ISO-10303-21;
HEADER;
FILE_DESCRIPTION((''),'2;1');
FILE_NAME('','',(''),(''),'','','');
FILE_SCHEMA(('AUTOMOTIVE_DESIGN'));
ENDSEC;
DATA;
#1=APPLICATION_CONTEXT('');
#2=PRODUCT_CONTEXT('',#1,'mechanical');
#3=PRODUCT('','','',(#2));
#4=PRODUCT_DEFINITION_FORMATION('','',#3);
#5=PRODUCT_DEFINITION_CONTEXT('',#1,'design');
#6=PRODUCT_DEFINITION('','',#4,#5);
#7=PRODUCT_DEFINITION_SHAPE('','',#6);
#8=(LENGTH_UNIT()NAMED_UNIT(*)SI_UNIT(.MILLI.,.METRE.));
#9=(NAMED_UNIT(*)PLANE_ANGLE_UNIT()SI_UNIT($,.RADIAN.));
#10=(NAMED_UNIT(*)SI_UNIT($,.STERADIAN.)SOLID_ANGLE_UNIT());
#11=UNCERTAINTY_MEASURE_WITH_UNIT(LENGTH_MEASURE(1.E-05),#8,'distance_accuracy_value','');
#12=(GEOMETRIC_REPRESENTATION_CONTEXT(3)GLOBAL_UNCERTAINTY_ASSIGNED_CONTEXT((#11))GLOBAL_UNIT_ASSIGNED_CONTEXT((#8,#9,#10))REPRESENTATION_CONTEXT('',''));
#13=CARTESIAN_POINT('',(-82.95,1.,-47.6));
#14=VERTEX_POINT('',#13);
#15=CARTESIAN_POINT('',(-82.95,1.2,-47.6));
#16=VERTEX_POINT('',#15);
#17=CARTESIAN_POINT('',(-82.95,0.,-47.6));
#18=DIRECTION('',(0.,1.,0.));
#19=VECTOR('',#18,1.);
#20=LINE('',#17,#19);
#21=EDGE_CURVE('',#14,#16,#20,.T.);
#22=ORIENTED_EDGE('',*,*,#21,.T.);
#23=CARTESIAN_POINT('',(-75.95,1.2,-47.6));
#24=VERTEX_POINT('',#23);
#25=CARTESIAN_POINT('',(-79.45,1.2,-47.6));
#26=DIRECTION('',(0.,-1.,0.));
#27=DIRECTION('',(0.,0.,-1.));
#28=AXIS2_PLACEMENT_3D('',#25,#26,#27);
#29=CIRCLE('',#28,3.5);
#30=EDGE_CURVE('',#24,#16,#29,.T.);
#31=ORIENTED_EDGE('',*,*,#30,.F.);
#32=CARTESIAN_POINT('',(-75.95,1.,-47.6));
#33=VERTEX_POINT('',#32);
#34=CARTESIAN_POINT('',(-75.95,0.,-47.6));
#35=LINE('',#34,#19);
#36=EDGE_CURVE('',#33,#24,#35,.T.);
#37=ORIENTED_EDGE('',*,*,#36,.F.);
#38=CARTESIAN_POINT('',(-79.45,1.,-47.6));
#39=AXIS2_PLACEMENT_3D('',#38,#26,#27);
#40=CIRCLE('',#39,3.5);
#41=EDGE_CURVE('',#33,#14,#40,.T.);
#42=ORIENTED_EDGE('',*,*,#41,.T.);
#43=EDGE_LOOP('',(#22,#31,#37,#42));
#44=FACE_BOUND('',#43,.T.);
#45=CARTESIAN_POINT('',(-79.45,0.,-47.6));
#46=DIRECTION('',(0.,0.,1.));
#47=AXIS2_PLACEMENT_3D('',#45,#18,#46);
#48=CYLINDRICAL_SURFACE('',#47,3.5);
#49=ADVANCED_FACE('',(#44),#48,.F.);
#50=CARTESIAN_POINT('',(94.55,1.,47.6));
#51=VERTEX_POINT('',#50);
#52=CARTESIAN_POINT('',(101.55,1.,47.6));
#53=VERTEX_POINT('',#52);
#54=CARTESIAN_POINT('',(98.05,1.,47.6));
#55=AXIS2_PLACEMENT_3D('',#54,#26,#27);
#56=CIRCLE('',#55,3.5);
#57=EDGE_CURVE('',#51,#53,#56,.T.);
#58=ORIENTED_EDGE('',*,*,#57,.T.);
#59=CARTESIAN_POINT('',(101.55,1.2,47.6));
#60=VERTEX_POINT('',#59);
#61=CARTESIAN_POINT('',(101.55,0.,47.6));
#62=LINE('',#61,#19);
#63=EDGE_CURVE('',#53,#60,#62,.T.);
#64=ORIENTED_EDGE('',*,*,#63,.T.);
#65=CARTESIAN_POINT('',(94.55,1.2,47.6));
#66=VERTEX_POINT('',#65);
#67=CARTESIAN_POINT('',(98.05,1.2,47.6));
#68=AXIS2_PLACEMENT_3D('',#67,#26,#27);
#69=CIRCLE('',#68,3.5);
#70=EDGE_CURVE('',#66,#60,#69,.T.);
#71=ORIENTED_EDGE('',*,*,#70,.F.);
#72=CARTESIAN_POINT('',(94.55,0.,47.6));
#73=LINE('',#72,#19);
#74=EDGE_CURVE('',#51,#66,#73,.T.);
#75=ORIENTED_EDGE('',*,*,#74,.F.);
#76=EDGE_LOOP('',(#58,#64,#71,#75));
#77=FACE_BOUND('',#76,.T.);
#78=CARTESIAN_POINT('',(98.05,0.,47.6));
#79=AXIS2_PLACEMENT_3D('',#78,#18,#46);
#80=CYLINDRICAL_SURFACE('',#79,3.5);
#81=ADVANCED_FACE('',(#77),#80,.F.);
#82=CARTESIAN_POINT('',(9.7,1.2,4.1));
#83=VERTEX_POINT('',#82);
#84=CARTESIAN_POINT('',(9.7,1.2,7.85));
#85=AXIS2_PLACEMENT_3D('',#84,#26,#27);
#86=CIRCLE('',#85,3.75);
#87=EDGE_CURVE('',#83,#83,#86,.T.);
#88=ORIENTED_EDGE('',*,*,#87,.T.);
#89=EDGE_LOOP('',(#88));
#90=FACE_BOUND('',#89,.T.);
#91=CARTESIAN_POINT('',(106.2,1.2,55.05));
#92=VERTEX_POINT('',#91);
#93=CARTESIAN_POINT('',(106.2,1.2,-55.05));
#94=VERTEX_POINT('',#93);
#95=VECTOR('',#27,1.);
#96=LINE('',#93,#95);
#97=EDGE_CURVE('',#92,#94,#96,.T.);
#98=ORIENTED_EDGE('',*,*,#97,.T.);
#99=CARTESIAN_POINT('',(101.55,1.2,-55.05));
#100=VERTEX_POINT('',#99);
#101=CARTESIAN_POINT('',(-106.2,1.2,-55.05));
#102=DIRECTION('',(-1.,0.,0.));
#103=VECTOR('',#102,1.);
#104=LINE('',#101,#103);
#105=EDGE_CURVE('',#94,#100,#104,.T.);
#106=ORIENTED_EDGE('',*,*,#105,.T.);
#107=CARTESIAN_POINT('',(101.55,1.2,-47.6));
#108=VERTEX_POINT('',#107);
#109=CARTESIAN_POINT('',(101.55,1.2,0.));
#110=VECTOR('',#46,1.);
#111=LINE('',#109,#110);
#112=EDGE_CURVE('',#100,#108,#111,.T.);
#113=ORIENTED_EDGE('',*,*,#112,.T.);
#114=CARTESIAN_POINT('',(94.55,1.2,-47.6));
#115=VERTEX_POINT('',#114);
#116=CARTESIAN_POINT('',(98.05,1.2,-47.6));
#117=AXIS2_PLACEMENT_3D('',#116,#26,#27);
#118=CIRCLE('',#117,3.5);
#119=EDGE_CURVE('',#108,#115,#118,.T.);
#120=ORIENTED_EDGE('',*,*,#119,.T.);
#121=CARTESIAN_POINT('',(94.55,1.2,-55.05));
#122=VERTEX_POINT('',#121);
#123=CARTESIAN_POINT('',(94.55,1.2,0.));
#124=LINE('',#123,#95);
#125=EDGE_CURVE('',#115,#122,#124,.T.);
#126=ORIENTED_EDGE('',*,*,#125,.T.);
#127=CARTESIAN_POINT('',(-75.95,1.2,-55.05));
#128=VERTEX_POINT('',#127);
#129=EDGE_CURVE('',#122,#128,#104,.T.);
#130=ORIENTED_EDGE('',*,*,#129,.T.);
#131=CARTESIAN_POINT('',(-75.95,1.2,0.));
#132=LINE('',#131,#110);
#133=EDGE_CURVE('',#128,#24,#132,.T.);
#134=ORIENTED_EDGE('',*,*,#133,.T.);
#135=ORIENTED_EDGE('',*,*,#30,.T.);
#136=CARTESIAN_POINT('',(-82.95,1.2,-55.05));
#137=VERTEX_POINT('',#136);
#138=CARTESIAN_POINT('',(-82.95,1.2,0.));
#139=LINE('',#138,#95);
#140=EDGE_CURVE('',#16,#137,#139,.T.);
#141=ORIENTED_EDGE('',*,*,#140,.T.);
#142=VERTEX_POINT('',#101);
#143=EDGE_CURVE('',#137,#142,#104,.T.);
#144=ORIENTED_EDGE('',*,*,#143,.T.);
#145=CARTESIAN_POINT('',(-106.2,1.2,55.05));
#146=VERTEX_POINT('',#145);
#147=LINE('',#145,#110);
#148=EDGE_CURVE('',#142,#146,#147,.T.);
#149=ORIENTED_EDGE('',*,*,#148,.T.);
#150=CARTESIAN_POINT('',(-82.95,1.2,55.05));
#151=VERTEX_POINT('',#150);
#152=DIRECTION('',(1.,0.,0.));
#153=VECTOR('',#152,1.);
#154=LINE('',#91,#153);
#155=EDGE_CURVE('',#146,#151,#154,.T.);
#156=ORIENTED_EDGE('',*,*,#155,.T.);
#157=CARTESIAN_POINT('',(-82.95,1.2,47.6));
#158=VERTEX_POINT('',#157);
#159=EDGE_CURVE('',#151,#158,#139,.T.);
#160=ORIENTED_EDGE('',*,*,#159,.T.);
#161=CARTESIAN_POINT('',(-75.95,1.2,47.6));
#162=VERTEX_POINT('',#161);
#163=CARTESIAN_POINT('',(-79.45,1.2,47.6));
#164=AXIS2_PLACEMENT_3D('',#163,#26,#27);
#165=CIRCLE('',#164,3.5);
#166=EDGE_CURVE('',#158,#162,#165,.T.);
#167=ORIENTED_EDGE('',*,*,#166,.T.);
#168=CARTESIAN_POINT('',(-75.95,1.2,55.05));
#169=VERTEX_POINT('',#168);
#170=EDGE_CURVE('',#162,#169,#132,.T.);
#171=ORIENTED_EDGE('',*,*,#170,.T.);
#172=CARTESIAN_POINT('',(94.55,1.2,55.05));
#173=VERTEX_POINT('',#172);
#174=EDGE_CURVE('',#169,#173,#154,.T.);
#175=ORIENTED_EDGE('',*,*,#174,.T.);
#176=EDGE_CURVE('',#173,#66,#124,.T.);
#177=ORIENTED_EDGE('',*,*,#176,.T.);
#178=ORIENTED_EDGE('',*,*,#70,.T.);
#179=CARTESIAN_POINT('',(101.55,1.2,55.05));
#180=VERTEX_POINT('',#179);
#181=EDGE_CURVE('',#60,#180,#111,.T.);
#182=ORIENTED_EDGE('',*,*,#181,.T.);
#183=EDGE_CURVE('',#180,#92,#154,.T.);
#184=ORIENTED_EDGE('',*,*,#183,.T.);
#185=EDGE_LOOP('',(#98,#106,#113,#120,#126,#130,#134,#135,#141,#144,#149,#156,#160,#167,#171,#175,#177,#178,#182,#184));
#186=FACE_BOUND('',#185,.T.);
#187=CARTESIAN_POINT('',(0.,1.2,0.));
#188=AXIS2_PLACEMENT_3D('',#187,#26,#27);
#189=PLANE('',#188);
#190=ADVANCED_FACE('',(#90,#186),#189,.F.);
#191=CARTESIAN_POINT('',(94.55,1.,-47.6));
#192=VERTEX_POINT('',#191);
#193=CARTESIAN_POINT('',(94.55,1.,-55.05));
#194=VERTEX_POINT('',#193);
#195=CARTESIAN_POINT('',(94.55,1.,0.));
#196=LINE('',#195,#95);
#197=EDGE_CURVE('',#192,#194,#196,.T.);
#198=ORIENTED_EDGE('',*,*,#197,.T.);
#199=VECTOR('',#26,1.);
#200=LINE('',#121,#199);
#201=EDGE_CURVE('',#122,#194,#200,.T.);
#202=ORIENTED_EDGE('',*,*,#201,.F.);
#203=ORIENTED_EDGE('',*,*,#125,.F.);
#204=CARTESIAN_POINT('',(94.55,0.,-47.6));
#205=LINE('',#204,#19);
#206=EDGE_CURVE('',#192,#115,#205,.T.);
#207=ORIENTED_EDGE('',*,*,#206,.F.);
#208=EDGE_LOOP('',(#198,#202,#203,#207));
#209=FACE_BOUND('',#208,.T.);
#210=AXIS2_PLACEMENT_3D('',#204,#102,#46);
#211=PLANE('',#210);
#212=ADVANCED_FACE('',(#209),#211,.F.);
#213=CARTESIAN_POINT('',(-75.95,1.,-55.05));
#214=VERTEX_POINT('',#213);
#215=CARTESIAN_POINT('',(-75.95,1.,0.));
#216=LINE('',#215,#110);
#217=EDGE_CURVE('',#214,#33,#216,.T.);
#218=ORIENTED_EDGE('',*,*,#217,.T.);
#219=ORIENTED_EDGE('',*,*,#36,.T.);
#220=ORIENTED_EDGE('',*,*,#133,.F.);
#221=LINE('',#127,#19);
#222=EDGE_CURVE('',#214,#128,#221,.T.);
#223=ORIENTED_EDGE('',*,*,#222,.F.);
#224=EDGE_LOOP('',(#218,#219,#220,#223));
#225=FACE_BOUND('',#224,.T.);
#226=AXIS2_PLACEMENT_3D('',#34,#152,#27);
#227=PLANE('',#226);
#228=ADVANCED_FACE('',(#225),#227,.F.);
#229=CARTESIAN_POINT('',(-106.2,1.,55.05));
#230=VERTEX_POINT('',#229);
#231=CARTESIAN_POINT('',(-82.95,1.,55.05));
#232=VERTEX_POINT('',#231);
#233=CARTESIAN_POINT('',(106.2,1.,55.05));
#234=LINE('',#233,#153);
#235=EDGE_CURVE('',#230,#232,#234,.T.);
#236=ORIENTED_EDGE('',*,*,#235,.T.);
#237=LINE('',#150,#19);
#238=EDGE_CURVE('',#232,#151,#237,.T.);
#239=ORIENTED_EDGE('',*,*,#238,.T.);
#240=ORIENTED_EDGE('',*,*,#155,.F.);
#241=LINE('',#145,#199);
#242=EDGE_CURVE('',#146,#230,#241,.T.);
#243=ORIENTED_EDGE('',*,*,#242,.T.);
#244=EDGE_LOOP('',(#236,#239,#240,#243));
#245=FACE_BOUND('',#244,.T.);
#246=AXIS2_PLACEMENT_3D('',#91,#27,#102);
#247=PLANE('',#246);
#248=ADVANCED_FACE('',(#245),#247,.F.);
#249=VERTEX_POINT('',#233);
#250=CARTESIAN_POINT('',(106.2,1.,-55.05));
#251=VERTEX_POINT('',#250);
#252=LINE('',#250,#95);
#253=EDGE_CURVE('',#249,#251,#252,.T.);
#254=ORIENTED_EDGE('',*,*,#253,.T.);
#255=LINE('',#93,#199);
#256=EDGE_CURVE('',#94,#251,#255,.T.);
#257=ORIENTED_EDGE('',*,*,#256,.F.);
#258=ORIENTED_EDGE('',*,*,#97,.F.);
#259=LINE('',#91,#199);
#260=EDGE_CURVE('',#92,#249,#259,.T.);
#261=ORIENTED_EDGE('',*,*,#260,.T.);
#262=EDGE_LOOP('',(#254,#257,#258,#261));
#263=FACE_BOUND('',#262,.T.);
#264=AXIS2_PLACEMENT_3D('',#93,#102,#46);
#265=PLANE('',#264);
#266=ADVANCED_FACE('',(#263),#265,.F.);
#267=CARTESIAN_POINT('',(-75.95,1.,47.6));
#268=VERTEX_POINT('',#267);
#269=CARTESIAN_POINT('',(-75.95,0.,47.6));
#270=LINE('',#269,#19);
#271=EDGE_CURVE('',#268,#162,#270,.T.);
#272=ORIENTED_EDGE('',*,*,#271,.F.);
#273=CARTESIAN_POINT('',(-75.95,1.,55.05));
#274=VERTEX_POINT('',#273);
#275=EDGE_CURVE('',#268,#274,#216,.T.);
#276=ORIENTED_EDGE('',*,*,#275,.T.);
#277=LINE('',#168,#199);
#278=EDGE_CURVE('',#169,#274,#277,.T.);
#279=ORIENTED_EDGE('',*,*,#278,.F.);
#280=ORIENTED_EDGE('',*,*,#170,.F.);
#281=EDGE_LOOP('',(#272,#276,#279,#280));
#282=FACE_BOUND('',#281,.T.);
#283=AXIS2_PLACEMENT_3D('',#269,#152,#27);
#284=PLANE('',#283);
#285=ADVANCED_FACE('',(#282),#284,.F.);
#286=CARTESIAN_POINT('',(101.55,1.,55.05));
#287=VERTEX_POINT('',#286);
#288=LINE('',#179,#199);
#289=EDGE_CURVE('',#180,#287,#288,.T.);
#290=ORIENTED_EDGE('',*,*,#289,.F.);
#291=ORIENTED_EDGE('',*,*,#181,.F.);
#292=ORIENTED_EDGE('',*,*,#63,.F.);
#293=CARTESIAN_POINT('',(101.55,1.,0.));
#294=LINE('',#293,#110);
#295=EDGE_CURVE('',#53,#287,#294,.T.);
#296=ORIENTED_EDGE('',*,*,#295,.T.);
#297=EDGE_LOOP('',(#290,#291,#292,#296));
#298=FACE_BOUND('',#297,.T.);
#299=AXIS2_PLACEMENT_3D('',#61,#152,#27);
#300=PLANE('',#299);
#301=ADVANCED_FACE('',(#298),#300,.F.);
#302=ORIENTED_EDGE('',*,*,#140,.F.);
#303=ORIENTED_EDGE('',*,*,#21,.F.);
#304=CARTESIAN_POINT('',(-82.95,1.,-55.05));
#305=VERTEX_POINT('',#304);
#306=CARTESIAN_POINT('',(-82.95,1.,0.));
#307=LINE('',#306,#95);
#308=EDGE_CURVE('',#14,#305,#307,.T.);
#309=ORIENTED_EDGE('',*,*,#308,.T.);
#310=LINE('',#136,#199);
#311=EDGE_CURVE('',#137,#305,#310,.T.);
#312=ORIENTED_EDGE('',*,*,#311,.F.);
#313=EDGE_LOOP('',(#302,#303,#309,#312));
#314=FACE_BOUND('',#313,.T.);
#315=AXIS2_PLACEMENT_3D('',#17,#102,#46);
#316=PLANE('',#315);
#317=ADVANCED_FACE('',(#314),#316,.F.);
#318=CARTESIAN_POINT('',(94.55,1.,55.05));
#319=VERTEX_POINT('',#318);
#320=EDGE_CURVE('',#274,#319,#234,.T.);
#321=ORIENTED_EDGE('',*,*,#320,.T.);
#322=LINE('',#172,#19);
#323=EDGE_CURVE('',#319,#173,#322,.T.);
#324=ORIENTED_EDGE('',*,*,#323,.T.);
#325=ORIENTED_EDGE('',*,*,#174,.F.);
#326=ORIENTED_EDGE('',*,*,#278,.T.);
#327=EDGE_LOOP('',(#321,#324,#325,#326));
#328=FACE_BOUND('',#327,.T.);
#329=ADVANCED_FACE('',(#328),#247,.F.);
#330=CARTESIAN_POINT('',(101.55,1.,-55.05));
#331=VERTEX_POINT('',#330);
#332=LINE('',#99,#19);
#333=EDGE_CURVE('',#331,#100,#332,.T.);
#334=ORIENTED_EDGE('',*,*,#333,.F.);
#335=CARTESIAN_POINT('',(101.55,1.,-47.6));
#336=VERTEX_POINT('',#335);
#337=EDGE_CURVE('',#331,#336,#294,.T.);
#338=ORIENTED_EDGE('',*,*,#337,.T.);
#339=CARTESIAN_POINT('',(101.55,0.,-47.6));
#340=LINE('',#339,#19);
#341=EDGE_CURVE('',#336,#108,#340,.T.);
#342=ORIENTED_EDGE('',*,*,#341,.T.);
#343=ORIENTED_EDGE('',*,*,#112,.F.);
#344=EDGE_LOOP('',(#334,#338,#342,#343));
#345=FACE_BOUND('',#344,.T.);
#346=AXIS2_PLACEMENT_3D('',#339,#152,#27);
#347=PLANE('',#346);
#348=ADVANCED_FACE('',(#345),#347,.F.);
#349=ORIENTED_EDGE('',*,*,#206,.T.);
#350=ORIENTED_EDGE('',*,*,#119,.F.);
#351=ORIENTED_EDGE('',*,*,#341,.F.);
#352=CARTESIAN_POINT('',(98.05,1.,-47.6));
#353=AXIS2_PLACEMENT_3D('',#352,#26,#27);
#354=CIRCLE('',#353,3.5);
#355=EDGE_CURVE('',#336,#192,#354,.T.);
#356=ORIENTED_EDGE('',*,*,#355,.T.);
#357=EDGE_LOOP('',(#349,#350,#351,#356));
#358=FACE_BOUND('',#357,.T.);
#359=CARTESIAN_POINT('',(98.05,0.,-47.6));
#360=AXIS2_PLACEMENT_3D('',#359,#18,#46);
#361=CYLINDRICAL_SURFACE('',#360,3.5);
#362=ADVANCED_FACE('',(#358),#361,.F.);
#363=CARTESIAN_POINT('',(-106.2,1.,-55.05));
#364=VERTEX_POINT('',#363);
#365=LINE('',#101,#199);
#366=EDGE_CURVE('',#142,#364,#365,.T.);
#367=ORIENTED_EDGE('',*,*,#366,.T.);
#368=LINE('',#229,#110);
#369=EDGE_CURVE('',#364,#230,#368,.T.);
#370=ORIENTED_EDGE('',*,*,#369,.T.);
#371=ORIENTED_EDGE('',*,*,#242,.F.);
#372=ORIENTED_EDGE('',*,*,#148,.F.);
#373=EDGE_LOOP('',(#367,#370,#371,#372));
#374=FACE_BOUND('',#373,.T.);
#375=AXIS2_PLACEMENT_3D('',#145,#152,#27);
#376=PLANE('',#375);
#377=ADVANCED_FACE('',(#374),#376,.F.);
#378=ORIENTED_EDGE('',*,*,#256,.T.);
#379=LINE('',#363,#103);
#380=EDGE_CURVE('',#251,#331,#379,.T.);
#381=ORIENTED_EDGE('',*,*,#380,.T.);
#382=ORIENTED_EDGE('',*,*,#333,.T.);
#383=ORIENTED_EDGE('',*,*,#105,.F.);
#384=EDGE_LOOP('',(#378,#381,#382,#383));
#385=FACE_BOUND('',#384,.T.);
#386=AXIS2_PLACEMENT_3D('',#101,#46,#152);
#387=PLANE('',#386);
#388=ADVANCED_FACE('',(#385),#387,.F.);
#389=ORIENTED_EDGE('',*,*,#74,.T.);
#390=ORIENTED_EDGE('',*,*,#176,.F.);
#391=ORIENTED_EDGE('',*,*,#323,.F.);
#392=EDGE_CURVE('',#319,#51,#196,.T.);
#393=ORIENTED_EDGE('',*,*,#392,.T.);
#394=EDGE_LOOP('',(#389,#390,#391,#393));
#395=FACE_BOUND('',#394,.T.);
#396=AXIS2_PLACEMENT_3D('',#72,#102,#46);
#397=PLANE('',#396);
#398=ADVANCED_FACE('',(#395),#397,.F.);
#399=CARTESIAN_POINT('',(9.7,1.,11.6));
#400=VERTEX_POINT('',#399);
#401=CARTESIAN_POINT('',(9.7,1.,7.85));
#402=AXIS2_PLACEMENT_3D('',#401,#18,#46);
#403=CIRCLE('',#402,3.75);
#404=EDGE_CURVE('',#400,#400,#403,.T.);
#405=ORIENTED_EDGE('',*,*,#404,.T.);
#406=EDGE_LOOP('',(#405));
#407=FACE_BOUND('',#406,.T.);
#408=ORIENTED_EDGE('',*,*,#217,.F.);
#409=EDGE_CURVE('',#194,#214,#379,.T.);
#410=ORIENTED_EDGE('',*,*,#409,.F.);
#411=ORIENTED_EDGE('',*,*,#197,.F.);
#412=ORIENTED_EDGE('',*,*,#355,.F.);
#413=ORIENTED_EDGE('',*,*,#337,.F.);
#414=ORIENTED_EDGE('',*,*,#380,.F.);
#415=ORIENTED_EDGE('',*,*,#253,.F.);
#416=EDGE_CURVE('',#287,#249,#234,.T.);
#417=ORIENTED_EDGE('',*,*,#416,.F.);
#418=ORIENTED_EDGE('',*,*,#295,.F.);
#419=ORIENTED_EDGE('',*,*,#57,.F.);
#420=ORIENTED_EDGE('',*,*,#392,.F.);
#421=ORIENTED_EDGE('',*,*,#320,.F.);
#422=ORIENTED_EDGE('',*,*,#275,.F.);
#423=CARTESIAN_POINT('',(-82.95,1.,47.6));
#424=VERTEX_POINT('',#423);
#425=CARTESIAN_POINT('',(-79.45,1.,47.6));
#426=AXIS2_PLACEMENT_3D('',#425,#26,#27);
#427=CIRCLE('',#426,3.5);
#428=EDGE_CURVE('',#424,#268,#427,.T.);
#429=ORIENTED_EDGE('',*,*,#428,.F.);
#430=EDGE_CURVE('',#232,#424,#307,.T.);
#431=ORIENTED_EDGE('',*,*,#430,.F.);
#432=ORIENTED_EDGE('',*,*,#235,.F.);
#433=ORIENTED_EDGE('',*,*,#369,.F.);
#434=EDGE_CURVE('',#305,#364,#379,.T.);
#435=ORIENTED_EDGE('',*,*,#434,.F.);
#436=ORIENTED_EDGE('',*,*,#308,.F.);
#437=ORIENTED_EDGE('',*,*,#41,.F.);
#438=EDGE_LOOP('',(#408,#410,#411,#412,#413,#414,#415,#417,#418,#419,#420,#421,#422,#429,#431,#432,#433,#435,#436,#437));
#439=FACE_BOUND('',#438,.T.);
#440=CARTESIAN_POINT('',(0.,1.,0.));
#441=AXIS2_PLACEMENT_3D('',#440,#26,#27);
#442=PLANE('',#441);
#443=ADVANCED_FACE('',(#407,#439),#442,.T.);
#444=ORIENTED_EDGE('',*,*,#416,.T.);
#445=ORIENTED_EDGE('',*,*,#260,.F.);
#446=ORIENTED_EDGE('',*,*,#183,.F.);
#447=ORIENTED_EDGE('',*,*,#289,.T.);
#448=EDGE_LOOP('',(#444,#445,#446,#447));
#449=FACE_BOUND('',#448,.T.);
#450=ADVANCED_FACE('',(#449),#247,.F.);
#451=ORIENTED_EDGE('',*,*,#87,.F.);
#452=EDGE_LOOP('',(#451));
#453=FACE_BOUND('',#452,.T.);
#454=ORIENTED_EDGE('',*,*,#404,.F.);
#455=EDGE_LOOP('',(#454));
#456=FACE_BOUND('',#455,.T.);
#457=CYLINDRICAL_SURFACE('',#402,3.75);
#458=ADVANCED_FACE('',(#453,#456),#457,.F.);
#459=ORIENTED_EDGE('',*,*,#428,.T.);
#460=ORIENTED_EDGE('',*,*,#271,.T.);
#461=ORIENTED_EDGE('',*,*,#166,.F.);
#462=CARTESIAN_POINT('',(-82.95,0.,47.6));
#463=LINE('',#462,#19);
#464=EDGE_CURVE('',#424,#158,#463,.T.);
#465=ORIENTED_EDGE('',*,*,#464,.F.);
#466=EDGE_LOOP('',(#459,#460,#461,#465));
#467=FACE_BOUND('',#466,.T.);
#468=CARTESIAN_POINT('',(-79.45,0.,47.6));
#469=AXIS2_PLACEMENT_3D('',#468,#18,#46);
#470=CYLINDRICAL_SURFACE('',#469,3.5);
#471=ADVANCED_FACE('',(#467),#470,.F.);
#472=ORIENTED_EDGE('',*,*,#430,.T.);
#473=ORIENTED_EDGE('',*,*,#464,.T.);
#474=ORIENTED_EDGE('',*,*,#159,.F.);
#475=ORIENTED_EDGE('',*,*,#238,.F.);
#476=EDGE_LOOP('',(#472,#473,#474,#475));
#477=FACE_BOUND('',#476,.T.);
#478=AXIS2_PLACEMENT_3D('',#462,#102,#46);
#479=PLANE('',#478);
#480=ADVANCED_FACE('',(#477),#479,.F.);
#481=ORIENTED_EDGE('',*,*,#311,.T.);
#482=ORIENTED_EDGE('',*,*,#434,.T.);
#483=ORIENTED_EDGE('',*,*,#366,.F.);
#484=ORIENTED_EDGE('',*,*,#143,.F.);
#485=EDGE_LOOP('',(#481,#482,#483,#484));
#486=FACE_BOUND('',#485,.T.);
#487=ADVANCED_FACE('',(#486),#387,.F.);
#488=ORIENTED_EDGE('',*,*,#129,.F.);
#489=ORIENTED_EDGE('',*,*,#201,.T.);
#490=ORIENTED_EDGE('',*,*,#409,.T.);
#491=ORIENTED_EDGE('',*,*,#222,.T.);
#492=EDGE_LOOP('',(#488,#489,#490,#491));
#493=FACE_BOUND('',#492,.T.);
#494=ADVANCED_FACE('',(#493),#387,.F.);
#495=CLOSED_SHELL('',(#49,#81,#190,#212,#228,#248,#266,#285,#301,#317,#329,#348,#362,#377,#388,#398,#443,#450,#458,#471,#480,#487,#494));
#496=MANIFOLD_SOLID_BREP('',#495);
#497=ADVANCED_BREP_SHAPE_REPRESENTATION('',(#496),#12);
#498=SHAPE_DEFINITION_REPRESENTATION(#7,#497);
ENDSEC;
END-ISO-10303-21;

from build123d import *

# Parameters (mm, degrees)
STOCK_BOTTOM_START        = 1
STOCK_BOTTOM_CASE_1_DEPTH = 0.2
CUT_EXTRUDE1_DEPTH        = 120.620159254
CUT_EXTRUDE1_DEPTH_BACK   = 120.620159254
SKETCH1_R                 = 3.75


# Read off the part's stored shape, not the designer's step: Stock-Bottom case-1
with BuildPart() as part:
    # Stock-Bottom case-1 outline → Stock-Bottom case-1 (new body)
    with BuildSketch(Plane(origin=(0, 0, 0), x_dir=(1, 0, 0), z_dir=(0, 1, 0)).offset(STOCK_BOTTOM_START)):
        with BuildLine():
            Line((94.55, 55.05), (-75.95, 55.05))
            Line((-75.95, 55.05), (-75.95, 47.6))
            ThreePointArc((-75.95, 47.6), (-79.45, 44.1), (-82.95, 47.6))
            Line((-82.95, 47.6), (-82.95, 55.05))
            Line((-82.95, 55.05), (-106.2, 55.05))
            Line((-106.2, 55.05), (-106.2, -55.05))
            Line((-106.2, -55.05), (-82.95, -55.05))
            Line((-82.95, -55.05), (-82.95, -47.6))
            ThreePointArc((-82.95, -47.6), (-79.45, -44.1), (-75.95, -47.6))
            Line((-75.95, -47.6), (-75.95, -55.05))
            Line((-75.95, -55.05), (94.55, -55.05))
            Line((94.55, -55.05), (94.55, -47.6))
            ThreePointArc((94.55, -47.6), (98.05, -44.1), (101.55, -47.6))
            Line((101.55, -47.6), (101.55, -55.05))
            Line((101.55, -55.05), (106.2, -55.05))
            Line((106.2, -55.05), (106.2, 55.05))
            Line((106.2, 55.05), (101.55, 55.05))
            Line((101.55, 55.05), (101.55, 47.6))
            ThreePointArc((101.55, 47.6), (98.05, 44.1), (94.55, 47.6))
            Line((94.55, 47.6), (94.55, 55.05))
        make_face()
    extrude(amount=STOCK_BOTTOM_CASE_1_DEPTH)

    # Sketch1 → Cut-Extrude1 (cut, two sides: drawn at the far end of the back side and taken through both)
    with BuildSketch(Plane(origin=(0, 1.2, 0), x_dir=(1, 0, 0), z_dir=(0, 1, 0)).offset(-CUT_EXTRUDE1_DEPTH_BACK)):
        with Locations(Location((9.7, -7.85, 0), (0, 0, 270))):
            Circle(SKETCH1_R)
    extrude(amount=CUT_EXTRUDE1_DEPTH + CUT_EXTRUDE1_DEPTH_BACK, mode=Mode.SUBTRACT)


solid = part.part
